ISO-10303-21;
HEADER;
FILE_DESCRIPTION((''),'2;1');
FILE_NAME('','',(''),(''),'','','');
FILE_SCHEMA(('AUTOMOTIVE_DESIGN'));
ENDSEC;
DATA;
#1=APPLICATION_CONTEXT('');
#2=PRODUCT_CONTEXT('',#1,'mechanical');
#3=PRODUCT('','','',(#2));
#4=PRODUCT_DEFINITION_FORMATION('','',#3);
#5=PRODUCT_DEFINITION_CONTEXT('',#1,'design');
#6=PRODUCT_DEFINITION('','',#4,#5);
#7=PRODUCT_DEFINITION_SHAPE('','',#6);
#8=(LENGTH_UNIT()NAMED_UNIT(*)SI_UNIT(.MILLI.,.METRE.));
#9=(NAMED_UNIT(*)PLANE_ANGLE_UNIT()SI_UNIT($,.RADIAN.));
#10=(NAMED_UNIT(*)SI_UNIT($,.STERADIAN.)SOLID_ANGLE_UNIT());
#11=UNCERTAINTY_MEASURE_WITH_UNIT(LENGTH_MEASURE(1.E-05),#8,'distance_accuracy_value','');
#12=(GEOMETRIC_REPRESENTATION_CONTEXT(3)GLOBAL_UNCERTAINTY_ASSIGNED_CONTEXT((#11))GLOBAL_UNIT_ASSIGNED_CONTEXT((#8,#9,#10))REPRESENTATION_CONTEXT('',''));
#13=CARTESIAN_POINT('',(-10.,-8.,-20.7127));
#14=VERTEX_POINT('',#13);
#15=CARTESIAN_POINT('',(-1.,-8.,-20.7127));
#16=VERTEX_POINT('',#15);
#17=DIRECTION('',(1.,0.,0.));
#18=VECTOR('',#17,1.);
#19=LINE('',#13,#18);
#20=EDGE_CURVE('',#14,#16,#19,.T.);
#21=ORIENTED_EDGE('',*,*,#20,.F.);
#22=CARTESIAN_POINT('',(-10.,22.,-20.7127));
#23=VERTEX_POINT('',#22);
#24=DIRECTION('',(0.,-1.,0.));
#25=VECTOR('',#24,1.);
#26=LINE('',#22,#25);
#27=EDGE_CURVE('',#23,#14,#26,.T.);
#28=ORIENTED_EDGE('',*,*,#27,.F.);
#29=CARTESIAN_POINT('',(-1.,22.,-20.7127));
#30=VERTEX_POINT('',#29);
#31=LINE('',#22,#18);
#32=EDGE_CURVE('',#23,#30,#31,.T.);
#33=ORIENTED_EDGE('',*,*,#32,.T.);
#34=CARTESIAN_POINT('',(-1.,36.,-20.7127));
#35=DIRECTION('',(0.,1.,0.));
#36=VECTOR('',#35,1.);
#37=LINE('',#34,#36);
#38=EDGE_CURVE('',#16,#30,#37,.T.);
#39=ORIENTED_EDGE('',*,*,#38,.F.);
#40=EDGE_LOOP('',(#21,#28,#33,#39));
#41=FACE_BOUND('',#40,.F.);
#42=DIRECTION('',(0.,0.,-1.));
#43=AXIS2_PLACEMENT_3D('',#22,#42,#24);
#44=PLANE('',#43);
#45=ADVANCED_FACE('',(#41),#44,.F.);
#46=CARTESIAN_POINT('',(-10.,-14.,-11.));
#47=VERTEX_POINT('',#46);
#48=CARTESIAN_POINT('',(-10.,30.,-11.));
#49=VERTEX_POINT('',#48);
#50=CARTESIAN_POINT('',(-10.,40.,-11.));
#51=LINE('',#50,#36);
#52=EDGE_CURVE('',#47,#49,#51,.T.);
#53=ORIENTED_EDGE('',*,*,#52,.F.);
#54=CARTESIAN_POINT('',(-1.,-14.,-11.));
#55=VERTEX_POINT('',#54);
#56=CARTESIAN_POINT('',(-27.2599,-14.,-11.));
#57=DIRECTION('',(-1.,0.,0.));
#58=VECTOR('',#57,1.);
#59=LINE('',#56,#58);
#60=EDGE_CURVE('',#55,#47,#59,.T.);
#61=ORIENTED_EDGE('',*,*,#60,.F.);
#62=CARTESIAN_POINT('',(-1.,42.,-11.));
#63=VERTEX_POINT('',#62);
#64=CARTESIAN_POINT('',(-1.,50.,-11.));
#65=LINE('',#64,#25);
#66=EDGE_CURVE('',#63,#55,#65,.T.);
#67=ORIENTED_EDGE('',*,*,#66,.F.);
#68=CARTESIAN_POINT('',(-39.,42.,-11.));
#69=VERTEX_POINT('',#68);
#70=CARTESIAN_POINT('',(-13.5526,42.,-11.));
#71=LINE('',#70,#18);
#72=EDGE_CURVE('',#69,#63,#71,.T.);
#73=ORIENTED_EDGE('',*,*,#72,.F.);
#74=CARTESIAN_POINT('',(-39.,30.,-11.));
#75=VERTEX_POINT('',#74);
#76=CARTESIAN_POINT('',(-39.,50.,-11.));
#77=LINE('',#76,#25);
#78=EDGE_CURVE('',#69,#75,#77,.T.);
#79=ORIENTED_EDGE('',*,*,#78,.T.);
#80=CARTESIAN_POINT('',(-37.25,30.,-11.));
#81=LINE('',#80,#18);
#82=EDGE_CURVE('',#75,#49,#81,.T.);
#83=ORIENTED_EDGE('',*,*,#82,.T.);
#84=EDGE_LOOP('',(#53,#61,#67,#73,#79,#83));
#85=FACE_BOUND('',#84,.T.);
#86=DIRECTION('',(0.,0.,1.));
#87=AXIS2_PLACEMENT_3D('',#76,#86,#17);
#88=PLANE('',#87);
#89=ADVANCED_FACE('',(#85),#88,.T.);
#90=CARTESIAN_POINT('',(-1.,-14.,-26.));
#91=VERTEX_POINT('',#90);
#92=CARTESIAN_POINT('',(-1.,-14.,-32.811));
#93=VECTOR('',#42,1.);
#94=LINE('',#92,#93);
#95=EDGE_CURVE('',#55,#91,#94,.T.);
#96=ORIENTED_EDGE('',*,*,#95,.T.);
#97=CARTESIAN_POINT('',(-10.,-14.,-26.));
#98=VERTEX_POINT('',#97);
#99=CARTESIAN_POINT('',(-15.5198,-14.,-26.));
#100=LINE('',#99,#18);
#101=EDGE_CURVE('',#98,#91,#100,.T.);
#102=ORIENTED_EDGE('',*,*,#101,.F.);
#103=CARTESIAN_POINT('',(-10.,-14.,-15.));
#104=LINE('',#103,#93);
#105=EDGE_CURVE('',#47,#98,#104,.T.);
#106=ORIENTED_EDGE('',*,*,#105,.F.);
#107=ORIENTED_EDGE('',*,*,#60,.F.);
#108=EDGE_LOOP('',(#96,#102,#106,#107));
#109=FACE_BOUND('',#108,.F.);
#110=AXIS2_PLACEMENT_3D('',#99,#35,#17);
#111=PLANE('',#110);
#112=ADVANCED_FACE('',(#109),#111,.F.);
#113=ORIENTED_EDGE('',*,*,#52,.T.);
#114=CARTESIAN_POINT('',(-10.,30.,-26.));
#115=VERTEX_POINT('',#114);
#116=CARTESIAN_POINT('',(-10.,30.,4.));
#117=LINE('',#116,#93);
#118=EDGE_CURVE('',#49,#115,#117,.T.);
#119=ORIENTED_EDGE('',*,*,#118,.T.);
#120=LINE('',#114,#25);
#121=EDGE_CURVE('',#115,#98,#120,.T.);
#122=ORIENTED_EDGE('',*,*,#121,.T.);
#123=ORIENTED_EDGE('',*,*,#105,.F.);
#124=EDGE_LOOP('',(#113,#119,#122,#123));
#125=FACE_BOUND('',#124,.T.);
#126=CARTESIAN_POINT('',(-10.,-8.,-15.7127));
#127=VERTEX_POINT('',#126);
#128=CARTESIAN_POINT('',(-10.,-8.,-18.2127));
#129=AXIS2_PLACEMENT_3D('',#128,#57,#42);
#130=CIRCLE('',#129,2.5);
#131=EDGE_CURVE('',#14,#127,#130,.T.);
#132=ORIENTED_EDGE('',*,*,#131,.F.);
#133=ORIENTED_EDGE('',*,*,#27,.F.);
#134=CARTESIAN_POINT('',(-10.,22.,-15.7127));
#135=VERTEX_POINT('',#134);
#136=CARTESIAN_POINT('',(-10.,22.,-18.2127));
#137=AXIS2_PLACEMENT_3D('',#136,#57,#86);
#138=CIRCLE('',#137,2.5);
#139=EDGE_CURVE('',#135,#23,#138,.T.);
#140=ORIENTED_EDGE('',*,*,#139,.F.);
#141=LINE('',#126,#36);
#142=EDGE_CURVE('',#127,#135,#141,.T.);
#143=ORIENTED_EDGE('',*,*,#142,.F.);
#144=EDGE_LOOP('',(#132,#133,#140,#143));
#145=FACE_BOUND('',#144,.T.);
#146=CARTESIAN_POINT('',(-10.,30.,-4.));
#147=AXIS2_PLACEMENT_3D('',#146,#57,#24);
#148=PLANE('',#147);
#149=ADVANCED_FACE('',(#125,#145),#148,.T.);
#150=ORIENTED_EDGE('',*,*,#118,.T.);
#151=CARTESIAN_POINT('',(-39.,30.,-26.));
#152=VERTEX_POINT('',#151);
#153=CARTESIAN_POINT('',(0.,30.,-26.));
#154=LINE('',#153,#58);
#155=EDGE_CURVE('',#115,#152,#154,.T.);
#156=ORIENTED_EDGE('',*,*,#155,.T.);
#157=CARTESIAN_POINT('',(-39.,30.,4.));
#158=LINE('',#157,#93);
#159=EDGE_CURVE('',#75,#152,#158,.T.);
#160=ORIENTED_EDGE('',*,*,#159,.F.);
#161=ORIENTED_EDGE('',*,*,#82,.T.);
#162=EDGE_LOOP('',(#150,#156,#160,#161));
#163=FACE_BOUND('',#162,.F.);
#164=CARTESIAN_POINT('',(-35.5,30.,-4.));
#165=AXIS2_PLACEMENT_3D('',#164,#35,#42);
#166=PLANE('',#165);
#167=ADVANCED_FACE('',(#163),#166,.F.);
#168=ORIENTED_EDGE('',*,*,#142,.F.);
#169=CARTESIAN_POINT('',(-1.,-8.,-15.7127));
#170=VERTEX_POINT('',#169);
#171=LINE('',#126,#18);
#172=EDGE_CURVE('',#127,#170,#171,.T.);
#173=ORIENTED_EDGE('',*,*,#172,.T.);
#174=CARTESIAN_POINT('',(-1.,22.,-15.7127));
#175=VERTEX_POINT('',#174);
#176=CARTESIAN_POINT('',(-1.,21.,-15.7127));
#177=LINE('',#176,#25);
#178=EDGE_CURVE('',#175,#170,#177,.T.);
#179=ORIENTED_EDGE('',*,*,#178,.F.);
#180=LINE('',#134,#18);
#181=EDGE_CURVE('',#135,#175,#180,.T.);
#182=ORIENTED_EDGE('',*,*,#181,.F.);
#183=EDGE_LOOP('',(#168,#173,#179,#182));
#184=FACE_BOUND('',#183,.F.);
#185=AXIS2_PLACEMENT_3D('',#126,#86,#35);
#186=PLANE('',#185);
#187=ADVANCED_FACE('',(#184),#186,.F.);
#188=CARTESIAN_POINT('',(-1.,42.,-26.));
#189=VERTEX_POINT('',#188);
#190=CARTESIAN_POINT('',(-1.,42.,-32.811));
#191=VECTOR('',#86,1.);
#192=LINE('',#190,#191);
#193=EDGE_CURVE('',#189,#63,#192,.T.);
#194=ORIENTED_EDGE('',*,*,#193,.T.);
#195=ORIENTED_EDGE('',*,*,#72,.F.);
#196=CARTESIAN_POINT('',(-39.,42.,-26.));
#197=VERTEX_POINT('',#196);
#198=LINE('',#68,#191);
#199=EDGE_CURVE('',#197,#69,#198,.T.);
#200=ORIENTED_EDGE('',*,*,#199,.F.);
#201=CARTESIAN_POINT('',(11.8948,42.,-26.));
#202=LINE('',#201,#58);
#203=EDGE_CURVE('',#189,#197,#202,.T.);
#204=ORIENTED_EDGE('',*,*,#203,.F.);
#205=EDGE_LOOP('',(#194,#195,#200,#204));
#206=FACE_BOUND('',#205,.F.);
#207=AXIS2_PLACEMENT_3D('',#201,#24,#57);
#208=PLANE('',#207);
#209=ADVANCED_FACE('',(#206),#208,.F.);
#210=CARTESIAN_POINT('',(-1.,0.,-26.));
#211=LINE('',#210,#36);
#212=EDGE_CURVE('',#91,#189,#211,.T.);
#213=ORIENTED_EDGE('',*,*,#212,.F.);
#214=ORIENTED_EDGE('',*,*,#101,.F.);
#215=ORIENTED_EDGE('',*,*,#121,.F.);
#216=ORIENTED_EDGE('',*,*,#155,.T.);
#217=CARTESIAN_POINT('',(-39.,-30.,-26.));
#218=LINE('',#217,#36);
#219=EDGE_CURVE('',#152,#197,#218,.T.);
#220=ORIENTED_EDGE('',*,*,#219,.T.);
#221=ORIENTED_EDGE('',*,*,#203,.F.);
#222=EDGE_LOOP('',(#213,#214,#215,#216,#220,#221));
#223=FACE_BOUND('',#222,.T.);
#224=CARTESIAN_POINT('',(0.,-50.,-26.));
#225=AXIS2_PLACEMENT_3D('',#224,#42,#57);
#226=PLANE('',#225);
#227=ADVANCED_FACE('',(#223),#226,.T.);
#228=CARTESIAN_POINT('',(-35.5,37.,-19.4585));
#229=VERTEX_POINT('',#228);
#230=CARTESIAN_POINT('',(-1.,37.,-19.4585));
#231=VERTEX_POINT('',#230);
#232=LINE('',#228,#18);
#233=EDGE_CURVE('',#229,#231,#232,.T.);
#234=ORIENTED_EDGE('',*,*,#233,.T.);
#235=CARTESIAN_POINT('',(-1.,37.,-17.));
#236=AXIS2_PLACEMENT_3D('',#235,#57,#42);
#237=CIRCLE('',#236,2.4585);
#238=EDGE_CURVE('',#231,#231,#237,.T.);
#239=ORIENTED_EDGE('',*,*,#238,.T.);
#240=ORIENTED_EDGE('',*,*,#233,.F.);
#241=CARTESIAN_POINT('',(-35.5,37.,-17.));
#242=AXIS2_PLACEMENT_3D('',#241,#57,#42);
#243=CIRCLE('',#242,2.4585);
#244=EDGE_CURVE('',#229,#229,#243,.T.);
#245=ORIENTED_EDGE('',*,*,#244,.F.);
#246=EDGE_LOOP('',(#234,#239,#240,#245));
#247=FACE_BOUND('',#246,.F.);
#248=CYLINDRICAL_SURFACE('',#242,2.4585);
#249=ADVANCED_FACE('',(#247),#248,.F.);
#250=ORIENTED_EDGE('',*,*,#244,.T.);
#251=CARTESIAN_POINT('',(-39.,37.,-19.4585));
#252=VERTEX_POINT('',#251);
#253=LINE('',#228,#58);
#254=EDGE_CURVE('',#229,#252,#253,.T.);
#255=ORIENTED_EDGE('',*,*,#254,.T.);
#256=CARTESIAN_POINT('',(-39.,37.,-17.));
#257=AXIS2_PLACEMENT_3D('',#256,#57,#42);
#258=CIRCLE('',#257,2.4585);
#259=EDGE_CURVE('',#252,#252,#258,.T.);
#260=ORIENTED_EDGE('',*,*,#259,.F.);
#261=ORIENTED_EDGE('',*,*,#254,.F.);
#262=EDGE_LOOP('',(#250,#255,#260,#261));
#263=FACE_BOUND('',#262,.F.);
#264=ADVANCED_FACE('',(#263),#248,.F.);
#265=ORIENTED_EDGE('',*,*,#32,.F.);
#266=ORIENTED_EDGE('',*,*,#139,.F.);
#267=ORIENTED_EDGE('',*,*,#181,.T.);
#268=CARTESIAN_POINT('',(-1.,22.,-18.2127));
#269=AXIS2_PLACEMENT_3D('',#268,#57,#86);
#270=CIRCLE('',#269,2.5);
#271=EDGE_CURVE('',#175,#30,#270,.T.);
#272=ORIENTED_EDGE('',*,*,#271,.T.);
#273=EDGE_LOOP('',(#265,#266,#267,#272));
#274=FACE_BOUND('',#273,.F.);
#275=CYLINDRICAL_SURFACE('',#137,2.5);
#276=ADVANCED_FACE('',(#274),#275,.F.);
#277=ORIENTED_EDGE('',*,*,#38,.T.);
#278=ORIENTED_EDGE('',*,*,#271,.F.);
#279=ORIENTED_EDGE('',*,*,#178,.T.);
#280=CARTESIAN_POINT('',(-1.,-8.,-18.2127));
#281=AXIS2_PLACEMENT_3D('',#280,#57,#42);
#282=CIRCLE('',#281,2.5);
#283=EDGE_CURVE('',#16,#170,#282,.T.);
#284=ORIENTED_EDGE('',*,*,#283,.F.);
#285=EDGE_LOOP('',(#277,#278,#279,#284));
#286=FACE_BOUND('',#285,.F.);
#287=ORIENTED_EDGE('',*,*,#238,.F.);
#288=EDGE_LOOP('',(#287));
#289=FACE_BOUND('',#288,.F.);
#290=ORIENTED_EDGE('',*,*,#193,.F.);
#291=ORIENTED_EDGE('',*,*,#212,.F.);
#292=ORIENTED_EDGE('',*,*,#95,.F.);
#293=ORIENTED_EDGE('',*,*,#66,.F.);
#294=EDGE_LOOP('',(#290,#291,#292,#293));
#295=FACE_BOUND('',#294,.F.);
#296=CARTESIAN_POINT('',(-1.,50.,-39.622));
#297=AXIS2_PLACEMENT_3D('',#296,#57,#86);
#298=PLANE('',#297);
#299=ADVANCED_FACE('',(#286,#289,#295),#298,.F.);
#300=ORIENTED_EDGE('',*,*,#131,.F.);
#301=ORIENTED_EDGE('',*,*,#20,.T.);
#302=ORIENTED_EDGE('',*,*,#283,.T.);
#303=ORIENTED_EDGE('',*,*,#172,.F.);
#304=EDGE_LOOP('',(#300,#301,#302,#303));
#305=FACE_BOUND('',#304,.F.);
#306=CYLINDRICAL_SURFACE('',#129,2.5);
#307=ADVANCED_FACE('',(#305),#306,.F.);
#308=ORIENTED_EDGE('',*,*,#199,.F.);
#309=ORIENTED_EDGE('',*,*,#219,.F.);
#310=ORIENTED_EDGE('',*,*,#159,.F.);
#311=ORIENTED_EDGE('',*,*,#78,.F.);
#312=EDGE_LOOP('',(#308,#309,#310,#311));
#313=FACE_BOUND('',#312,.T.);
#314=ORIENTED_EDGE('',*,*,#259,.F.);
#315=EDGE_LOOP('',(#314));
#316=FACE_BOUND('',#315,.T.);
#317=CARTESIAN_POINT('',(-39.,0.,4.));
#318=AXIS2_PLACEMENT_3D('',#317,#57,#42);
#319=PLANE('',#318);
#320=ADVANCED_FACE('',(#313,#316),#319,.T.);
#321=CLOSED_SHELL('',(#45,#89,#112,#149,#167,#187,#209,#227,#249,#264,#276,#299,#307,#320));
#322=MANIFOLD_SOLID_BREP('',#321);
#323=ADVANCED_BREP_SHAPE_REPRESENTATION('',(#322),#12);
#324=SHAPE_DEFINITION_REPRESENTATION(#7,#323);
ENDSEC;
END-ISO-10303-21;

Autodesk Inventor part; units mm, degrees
ref_plane "YZ Plane" through (0, 0, 0) normal (1, 0, 0) x (0, 1, 0)
ref_plane "XZ Plane" through (0, 0, 0) normal (0, 1, 0) x (-1, 0, 0)
ref_plane "XY Plane" through (0, 0, 0) normal (0, 0, 1) x (1, 0, 0)
sketch "Skizze1" plane through (0, 0, 0) normal (0, 1, 0) x (-1, 0, 0)
  line L0 (0, 0) -> (0, 8)
  line L1 (0, 8) -> (2, 8)
  line L2 (2, 8) -> (2, 4)
  line L3 (2, 4) -> (39, 4)
  line L4 (39, 4) -> (39, 0)
  line L5 (0, 0) -> (13.2064, 0)
  line L6 (0, 0) -> (0, -8)
  line L7 (0, -8) -> (2, -8)
  line L8 (2, -8) -> (2, -4)
  line L9 (2, -4) -> (39, -4)
  line L10 (39, -4) -> (39, 0)
  dimension "d1" = 8
  dimension "d2" = 2
  dimension "d3" = 4
  dimension "d4" = 37
extrude "Extrusion1" add sketch "Skizze1" along normal mid plane 100
sketch "Skizze5" plane through (-39, -50, 4) normal (0, 0, 1) x (1, 0, 0)
  line L0 (0, 0) -> (0, 100) projected
  line L1 (0, 0) -> (3.5, 0)
  line L2 (3.5, 0) -> (3.5, 20)
  line L3 (3.5, 20) -> (0, 20)
  line L4 (0, 20) -> (0, 0)
  point P0 (39, 50)
  point P1 (0, 20.0912)
  dimension "d22" = 3.5
  dimension "d23" = 20
extrude "Extrusion3" add sketch "Skizze5" along normal blind 20 and the other way blind 30
sketch "Skizze6" plane through (-39, 50, 4) normal (0, 0, 1) x (1, 0, 0)
  line L0 (0, -80) -> (0, 0) projected
  line L1 (0, 0) -> (3.5, 0)
  line L2 (3.5, 0) -> (3.5, -20)
  line L3 (3.5, -20) -> (0, -20)
  line L4 (0, -20) -> (0, 0)
  point P0 (39, -50)
  point P1 (0, -19.9088)
  point P2 (0, -20)
  dimension "d26" = 20
  dimension "d32" = 3.5
extrude "Extrusion4" add sketch "Skizze6" along normal blind 20 and the other way blind 30
sketch "Esquisse11" plane through (-35.5, 30, -4) normal (1, 0, 0) x (0, 0, -1)
  line L0 (22, 20) -> (0, 20) projected
  line L1 (22, 20) -> (22, 0) projected
  line L2 (22, -60) -> (22, -80) projected
  point P0 (-4, -30)
  point P1 (13, 7)
  point P2 (13, -67)
  dimension "d57" = 13
  dimension "d58" = 74
  dimension "d59" = 9
  dimension "d60" = 9
hole "Perçage3" at (-35.5, 37, -17) at (-35.5, -37, -17) direction (-1, 0, 0) diameter 4.917 end through all thread size "M6x1" class "6H" standard "ISO Metric profile"
sketch "Esquisse21" plane through (-35.5, -50, 4) normal (1, 0, 0) x (0, 0, -1)
  line L0 (0, 100) -> (0, 80) projected
  line L1 (0, 20) -> (0, 80) projected
  line L2 (0, 20) -> (0, 0) projected
  line L3 (0, 100) -> (0, 0) projected
  line L4 (-36.3372, 0) -> (0, 0)
  line L5 (0, 0) -> (0, 115.7943)
  line L6 (0, 115.7943) -> (-36.3372, 115.7943)
  line L7 (-36.3372, 115.7943) -> (-36.3372, 0)
  point P0 (4, 50)
  point P1 (0, 20)
extrude "Extrusion15" cut sketch "Esquisse21" along normal mid plane 9999
sketch "Esquisse28" plane through (0, 50, 0) normal (0, 1, 0) x (1, 0, 0)
  line L0 (-2, 4) -> (-35.5, 4) projected
  line L1 (-4.0336, 4) -> (2.9868, 4)
  line L2 (2.9868, 4) -> (2.9868, 11.523)
  line L3 (2.9868, 11.523) -> (-4.0336, 11.523)
  line L4 (-4.0336, 11.523) -> (-4.0336, 4)
  point P0 (0, 0)
extrude "Extrusion20" cut sketch "Esquisse28" against normal through all
sketch "Esquisse29" plane through (-35.5, -50, -4) normal (1, 0, 0) x (0, 0, -1)
  circle A0 centre (13, 87) radius 2.4585 projected
  line L0 (0, 80) -> (0, 100) projected
  line L1 (0, 80) -> (22, 80) projected
  line L2 (22, 100) -> (22, 80) projected
  line L3 (22, 100) -> (0, 100) projected
  circle A1 centre (13, 13) radius 2.4585 construction
  line L4 (0, 0) -> (0, 20) construction
  line L5 (22, 0) -> (0, 0) construction
  line L6 (22, 20) -> (22, 0) construction
  line L7 (0, 20) -> (22, 20) construction
  point P0 (-4, 50)
extrude "Extrusion21" add sketch "Esquisse29" along normal up to surface (35.5 mm away)
sketch "Esquisse30" plane through (0, -50, -4) normal (0, 0, -1) x (-1, 0, 0)
  line L0 (39, 80) -> (0, 80) projected
  line L1 (35.5, 0) -> (0, 0) projected
  line L2 (0, 80) -> (10, 80)
  line L3 (10, 80) -> (10, 0)
  line L4 (10, 0) -> (0, 0)
  line L5 (0, 0) -> (0, 80)
  point P0 (0, 0)
  dimension "d128" = 10
extrude "Extrusion22" add sketch "Esquisse30" along normal up to surface (22 mm away)
sketch "Esquisse31" plane through (-35.5, -30, -4) normal (0, 0, -1) x (-1, 0, 0)
  line L0 (8.9947, 60) -> (-25.5, 60)
  line L1 (-25.5, 60) -> (-25.5, -26.2912)
  line L2 (-25.5, -26.2912) -> (8.9947, -26.2912)
  line L3 (8.9947, -26.2912) -> (8.9947, 60)
  point P0 (-35.5, 30)
extrude "Extrusion23" cut sketch "Esquisse31" along normal blind 100 and the other way blind 100
sketch "Esquisse32" plane through (-39, 50, -26) normal (0, 0, -1) x (-1, 0, 0)
  line L0 (-24.4847, -70) -> (-46.2931, -70)
  line L1 (-46.2931, -70) -> (-46.2931, -103.0341)
  line L2 (-46.2931, -103.0341) -> (-24.4847, -103.0341)
  line L3 (-24.4847, -103.0341) -> (-24.4847, -70)
  line L4 (-29, -100) -> (-39, -100) projected
  point P0 (-39, -50)
  dimension "d137" = 30
extrude "Extrusion24" cut sketch "Esquisse32" against normal through all
sketch "Esquisse33" plane through (0, 50, 0) normal (0, 1, 0) x (1, 0, 0)
  line L0 (0, -4) -> (0, 26) projected
  line L1 (-39, 26) -> (-39, -4) projected
  line L2 (0, -4) -> (-39, -4)
  line L3 (-39, -4) -> (-39, 11)
  line L4 (-39, 11) -> (0, 11)
  line L5 (0, 11) -> (0, -4)
  point P0 (0, 0)
  point P1 (-39, -4)
extrude "Extrusion25" cut sketch "Esquisse33" against normal through all
sketch "Esquisse34" plane through (-10, -20, -26) normal (-1, 0, 0) x (0, 0, 1)
  line L0 (7.7873, 42) -> (7.7873, 12) construction
  line L1 (5.2873, 42) -> (5.2873, 12)
  line L2 (10.2873, 12) -> (10.2873, 42)
  arc A0 (10.2873, 42) -> (5.2873, 42) centre (7.7873, 42) ccw
  arc A1 (5.2873, 12) -> (10.2873, 12) centre (7.7873, 12) ccw
  line L3 (0, 0) -> (15, 0) projected
  line L4 (0, 50) -> (15, 50) projected
  point P0 (26, 20)
  point P1 (7.7873, 27)
  dimension "d141" = 8
  dimension "d142" = 5
  dimension "d151" = 30
extrude "Extrusion26" cut sketch "Esquisse34" against normal through all
sketch "Esquisse35" plane through (0, 50, 0) normal (0, 1, 0) x (1, 0, 0)
  line L0 (-1, 5.3347) -> (8.2352, 5.3347)
  line L1 (8.2352, 5.3347) -> (8.2352, 39.622)
  line L2 (8.2352, 39.622) -> (-1, 39.622)
  line L3 (-1, 39.622) -> (-1, 5.3347)
  line L4 (0, 11) -> (0, 26) projected
  point P0 (0, 0)
  dimension "d145" = 1
extrude "Extrusion27" cut sketch "Esquisse35" against normal through all
sketch "Esquisse36" plane through (-39, 50, -26) normal (0, 0, -1) x (-1, 0, 0)
  line L0 (7.4978, 8.0322) -> (-50.8948, 8.0322)
  line L1 (-50.8948, 8.0322) -> (-50.8948, -8)
  line L2 (-50.8948, -8) -> (7.4978, -8)
  line L3 (7.4978, -8) -> (7.4978, 8.0322)
  line L4 (0, 0) -> (-38, 0) projected
  point P0 (-39, -50)
  dimension "d148" = 8
extrude "Extrusion28" cut sketch "Esquisse36" against normal through all
sketch "Esquisse37" plane through (-39, 50, -26) normal (0, 0, -1) x (-1, 0, 0)
  line L0 (-23.4802, -64) -> (-55.2745, -64)
  line L1 (-55.2745, -64) -> (-55.2745, -79.7659)
  line L2 (-55.2745, -79.7659) -> (-23.4802, -79.7659)
  line L3 (-23.4802, -79.7659) -> (-23.4802, -64)
  line L4 (-38, -70) -> (-29, -70) projected
  point P0 (-39, -50)
  dimension "d152" = 6
extrude "Extrusion29" cut sketch "Esquisse37" against normal through all
properties part number "Befestigung Bremssattel"
